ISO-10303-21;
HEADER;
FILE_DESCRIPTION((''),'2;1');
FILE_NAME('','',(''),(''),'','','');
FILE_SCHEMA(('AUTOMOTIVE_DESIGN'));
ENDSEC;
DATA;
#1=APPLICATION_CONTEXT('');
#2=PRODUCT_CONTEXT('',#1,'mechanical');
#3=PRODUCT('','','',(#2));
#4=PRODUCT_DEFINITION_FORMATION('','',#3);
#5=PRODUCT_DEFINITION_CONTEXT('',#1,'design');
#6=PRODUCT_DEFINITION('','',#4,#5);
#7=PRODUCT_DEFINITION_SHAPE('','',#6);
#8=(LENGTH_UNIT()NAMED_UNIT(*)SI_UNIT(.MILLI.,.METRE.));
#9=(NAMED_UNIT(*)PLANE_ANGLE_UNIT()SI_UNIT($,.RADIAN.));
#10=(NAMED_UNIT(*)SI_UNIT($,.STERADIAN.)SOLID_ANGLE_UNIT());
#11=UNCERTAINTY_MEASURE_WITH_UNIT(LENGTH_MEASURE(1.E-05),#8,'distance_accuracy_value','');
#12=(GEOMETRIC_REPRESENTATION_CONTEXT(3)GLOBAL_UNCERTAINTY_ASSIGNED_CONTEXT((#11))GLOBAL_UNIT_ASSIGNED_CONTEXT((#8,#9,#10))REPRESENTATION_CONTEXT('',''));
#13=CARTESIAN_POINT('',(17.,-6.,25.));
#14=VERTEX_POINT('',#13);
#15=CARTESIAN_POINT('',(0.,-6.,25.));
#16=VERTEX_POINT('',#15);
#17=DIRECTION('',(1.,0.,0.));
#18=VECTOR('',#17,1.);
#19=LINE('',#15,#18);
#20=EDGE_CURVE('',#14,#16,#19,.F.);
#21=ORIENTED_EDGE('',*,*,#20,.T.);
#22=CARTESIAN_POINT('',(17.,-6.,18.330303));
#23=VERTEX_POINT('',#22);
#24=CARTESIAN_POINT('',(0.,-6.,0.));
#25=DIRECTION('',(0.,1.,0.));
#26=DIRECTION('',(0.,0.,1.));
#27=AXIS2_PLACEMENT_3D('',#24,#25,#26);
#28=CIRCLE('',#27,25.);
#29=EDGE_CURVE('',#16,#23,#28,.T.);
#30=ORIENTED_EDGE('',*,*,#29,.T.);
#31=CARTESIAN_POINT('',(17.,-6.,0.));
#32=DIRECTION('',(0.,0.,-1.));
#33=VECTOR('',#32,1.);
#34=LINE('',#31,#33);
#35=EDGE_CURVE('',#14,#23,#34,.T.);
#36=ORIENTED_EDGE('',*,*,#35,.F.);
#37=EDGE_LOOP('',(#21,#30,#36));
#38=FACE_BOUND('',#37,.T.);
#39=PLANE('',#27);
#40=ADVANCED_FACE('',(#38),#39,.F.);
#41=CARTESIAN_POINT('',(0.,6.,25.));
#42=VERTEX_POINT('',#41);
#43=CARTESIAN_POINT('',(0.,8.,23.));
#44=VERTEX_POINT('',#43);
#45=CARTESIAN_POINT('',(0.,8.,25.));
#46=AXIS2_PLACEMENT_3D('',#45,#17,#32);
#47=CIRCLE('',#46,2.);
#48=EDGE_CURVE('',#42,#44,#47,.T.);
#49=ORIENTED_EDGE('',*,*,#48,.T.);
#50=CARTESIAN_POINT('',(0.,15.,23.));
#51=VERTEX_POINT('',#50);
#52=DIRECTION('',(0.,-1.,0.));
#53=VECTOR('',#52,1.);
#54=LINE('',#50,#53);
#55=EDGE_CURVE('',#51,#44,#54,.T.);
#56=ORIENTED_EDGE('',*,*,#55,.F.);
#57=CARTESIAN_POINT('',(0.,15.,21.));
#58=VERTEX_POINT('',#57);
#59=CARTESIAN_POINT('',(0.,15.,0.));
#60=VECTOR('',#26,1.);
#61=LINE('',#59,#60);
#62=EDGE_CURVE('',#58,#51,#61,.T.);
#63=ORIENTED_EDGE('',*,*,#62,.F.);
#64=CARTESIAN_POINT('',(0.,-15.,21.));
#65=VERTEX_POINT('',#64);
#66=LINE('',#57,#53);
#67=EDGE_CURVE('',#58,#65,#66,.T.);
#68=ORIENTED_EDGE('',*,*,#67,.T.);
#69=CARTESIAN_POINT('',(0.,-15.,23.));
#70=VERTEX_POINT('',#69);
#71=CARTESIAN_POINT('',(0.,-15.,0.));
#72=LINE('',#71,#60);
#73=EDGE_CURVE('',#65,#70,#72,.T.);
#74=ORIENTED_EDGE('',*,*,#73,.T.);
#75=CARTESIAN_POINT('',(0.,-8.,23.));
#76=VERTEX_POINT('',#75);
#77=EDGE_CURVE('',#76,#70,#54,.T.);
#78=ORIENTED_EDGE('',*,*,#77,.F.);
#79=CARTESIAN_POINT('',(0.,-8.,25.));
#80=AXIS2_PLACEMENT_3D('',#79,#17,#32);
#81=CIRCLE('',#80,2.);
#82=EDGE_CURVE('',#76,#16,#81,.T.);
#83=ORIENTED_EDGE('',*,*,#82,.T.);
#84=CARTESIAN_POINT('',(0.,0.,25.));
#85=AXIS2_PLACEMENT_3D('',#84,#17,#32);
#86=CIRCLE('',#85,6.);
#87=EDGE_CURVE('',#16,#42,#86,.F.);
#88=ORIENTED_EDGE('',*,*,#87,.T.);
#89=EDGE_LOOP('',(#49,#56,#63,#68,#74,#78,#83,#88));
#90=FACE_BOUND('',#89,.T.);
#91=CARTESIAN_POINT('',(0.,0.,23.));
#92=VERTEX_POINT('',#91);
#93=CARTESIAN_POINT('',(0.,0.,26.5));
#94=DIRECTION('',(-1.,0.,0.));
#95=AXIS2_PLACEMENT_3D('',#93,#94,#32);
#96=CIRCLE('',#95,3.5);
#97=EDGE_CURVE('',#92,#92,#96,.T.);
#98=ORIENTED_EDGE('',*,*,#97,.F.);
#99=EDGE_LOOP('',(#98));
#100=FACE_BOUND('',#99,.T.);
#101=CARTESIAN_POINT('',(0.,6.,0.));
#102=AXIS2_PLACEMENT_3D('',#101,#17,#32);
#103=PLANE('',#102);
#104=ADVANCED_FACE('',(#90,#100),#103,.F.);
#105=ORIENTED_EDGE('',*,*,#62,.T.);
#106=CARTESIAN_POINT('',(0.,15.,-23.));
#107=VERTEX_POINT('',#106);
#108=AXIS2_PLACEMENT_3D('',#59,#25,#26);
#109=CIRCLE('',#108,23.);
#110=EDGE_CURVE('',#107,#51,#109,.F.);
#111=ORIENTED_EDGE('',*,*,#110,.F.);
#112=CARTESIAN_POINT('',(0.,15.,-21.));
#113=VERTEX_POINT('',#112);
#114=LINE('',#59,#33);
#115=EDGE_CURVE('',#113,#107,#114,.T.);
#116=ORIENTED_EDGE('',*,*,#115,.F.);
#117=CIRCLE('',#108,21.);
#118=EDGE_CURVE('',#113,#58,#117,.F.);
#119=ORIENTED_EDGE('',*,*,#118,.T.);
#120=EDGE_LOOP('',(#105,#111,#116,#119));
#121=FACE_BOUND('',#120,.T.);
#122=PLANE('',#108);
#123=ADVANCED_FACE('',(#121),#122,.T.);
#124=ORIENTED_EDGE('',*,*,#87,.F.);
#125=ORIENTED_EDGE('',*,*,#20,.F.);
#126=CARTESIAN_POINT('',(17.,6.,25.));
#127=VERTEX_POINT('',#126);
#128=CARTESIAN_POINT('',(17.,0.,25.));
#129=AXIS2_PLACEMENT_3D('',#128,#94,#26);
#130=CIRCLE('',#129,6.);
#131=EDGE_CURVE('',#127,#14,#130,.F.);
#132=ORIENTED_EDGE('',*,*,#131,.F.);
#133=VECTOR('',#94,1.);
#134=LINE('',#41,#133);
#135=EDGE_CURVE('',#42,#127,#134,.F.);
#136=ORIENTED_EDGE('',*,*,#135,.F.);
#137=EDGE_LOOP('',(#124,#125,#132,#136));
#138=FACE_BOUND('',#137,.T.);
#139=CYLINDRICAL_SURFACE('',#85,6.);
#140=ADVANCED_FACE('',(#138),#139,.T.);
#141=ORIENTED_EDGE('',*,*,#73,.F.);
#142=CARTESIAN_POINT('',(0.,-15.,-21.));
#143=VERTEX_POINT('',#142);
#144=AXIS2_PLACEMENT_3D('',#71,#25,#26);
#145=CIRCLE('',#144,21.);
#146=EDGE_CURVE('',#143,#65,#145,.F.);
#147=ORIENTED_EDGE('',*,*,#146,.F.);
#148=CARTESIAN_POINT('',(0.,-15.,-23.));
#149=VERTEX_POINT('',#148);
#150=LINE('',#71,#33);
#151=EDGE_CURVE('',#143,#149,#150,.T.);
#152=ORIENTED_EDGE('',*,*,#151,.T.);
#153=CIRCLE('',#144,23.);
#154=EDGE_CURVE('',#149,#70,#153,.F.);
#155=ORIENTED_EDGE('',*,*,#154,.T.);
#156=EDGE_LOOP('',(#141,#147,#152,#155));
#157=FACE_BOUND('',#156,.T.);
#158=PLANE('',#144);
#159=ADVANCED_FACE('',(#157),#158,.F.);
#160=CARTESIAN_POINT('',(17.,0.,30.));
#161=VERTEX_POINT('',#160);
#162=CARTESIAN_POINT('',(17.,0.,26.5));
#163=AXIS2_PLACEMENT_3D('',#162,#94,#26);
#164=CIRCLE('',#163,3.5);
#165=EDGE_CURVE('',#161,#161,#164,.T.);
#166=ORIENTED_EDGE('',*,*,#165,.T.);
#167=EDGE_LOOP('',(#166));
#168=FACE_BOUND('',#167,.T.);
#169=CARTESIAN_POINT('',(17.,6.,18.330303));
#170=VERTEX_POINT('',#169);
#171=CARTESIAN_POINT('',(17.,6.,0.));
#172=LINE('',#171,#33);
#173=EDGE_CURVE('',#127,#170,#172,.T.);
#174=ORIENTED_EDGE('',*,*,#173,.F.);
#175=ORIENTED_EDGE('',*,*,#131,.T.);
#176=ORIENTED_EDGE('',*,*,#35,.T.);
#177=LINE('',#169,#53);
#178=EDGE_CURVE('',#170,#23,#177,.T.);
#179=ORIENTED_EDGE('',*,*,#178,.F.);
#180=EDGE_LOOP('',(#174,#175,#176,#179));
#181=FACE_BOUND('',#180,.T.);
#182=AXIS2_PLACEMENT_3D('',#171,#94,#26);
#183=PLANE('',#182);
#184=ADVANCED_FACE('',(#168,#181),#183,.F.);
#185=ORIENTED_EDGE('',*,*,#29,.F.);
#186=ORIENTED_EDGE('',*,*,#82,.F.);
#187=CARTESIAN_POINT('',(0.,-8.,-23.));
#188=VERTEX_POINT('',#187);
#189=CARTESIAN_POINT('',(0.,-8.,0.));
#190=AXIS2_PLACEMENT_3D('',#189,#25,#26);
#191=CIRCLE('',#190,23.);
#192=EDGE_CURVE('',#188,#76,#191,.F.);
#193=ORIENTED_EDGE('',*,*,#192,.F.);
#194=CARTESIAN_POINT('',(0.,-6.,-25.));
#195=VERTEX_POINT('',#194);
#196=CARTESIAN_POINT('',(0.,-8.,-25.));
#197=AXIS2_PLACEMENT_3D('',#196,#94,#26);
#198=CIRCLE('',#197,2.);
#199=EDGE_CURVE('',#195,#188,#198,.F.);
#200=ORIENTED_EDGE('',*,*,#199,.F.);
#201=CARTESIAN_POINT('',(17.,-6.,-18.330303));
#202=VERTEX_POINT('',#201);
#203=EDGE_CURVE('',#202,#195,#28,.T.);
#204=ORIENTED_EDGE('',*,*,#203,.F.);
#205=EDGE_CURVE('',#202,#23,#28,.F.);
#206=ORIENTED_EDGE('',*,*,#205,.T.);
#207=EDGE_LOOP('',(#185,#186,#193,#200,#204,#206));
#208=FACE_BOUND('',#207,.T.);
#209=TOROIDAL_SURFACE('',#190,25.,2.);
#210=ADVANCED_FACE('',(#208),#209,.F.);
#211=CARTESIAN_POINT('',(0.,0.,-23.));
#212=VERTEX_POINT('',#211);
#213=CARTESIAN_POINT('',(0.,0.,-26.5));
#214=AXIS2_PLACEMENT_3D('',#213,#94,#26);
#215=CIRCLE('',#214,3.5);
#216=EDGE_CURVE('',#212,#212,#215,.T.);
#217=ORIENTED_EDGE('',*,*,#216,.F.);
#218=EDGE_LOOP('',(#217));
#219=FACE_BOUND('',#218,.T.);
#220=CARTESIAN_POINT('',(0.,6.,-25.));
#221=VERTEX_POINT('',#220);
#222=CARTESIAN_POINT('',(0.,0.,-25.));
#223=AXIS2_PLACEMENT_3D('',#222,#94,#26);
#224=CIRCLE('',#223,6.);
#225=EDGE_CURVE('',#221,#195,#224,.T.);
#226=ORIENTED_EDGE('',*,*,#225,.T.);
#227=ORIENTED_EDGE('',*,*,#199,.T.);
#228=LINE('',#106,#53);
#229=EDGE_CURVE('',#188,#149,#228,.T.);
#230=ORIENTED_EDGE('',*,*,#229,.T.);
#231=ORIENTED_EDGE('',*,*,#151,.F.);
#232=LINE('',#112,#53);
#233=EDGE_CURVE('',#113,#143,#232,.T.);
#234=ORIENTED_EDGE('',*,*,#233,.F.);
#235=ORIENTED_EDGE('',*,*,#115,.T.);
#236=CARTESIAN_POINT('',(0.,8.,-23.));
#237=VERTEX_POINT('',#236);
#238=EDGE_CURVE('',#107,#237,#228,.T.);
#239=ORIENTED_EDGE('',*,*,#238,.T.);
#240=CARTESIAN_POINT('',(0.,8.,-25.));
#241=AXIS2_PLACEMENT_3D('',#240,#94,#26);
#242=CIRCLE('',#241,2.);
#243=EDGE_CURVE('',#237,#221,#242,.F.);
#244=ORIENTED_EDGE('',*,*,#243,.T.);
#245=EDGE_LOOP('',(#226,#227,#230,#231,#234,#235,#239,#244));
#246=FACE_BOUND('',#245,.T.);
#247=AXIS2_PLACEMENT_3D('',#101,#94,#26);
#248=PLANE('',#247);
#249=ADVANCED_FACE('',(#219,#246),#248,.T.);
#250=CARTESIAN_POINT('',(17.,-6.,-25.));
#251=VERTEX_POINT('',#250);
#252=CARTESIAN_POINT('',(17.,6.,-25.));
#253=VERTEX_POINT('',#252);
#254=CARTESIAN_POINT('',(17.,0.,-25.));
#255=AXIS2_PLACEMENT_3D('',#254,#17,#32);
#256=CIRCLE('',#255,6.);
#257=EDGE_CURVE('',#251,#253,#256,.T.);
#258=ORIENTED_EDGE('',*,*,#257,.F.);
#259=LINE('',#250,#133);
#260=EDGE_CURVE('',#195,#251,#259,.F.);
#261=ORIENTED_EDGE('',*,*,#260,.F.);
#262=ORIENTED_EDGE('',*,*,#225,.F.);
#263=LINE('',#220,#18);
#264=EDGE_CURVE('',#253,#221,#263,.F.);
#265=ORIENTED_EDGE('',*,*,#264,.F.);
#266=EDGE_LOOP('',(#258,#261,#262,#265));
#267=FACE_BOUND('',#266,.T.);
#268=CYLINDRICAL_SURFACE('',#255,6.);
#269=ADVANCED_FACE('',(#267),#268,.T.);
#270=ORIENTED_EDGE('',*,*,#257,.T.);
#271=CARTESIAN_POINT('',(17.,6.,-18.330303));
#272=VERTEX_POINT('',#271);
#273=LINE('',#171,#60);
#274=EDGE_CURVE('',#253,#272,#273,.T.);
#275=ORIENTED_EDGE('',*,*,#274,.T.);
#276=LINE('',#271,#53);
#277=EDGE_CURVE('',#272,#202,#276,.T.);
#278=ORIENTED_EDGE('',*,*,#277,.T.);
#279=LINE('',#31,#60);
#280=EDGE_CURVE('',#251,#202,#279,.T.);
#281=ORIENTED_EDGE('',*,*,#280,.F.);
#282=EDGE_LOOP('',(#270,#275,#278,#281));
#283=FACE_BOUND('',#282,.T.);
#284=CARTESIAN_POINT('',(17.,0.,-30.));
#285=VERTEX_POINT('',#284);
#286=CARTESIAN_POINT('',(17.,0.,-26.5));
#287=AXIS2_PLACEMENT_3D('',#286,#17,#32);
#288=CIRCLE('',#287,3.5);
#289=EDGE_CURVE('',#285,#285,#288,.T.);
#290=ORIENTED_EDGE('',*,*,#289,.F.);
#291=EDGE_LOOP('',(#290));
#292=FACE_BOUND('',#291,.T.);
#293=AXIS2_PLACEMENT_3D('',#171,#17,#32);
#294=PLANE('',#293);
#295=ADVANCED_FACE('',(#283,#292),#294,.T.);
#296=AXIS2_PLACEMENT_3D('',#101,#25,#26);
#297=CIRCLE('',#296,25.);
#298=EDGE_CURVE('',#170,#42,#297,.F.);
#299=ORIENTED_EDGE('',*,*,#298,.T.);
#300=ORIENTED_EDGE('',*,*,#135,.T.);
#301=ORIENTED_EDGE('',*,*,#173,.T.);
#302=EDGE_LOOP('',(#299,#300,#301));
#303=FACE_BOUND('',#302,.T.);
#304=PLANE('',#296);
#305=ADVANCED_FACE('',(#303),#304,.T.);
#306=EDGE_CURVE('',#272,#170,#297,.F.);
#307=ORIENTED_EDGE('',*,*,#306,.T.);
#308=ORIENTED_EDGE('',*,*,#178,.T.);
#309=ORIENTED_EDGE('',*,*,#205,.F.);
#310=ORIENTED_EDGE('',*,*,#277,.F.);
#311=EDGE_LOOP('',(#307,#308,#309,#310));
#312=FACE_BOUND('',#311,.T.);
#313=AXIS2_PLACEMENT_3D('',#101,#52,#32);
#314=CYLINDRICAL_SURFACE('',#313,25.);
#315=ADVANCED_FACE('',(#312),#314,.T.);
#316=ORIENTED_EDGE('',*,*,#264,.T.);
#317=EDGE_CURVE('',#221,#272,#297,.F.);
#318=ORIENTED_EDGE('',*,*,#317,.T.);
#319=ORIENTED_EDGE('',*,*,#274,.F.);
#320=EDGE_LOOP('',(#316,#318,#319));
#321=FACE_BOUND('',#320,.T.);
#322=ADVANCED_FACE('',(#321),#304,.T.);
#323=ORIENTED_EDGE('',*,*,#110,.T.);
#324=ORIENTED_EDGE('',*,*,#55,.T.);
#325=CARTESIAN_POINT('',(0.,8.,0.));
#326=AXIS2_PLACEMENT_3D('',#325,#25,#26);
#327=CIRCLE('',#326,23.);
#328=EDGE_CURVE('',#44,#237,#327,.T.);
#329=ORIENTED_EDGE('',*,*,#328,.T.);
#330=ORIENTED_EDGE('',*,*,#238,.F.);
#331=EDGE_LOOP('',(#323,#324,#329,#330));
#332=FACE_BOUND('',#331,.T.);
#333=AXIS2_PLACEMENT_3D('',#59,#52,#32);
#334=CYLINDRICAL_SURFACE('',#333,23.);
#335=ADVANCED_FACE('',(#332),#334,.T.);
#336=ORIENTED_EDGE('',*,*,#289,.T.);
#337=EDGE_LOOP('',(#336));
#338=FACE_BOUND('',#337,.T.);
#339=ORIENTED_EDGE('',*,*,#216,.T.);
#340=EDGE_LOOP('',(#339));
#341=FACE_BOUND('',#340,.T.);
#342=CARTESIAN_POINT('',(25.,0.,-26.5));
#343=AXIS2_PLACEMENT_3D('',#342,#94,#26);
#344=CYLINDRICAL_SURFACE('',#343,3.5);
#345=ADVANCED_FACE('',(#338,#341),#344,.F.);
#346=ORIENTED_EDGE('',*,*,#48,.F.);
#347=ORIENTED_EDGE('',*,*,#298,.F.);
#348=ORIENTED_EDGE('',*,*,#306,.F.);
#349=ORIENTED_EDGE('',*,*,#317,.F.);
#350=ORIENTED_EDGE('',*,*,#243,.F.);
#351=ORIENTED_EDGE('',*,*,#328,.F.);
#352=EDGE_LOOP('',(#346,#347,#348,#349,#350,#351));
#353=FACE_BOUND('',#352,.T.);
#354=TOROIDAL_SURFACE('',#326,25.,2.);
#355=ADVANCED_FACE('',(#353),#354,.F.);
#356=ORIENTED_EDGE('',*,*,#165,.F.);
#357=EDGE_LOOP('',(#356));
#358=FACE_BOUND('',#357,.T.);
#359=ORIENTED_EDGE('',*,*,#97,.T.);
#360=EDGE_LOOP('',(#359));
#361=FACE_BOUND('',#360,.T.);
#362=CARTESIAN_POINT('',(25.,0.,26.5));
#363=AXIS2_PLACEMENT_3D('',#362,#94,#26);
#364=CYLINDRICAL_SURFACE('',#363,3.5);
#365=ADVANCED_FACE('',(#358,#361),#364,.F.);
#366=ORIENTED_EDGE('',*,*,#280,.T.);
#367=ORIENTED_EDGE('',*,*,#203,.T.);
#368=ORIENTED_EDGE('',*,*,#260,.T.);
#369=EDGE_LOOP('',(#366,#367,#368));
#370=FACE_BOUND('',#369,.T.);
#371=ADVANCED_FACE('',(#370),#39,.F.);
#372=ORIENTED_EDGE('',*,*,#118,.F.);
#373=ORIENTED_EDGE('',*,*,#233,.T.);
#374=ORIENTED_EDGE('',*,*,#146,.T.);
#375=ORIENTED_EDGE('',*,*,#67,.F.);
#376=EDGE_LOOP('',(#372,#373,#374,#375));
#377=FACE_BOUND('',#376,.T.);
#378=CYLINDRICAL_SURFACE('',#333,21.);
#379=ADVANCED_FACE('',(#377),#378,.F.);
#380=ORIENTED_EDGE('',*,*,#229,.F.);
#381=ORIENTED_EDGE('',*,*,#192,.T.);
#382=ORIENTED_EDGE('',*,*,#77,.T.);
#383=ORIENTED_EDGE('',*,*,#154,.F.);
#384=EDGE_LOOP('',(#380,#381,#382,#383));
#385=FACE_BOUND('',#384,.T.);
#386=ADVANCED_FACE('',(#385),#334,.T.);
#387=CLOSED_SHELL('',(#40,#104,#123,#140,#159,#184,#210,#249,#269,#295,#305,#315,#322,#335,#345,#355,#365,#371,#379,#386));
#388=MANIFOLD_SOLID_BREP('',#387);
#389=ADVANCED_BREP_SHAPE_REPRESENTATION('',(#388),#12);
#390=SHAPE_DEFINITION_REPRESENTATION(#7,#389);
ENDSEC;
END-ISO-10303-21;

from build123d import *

# Parameters (mm, degrees)
BOSS_EXTRUDE1_DEPTH = 6
BOSS_EXTRUDE2_DEPTH = 15
FILLET1_RADIUS      = 6
FILLET1_LENGTH      = 17
FILLET2_RADIUS      = 6
FILLET2_LENGTH      = 17
FILLET3_ANGLE       = 180
SKETCH2_R           = 3.5
CUT_EXTRUDE1_DEPTH  = 43.555845662


with BuildPart() as part:
    # Sketch1 → Boss-Extrude1 (new, symmetric)
    with BuildSketch(Plane(origin=(0, 0, 0), x_dir=(1, 0, 0), z_dir=(0, 1, 0))):
        with BuildLine():
            Line((25, 0), (23, 0))
            ThreePointArc((23, 0), (16.263455967, -16.263455967), (0, -23))
            Line((0, -23), (0, -31))
            Line((0, -31), (17, -31))
            Line((17, -31), (17, -18.33030278))
            ThreePointArc((17, -18.33030278), (22.912878475, -10), (25, 0))
        make_face()
        with BuildLine():
            Line((0, 31), (0, 23))
            ThreePointArc((0, 23), (16.263455967, 16.263455967), (23, 0))
            Line((23, 0), (25, 0))
            ThreePointArc((25, 0), (22.912878475, 10), (17, 18.33030278))
            Line((17, 18.33030278), (17, 31))
            Line((17, 31), (0, 31))
        make_face()
    extrude(amount=BOSS_EXTRUDE1_DEPTH, both=True)

    # Sketch1<4> → Boss-Extrude2 (add, symmetric)
    with BuildSketch(Plane(origin=(0, 0, 0), x_dir=(1, 0, 0), z_dir=(0, 1, 0))):
        with BuildLine():
            Line((0, 23), (0, 21))
            ThreePointArc((0, 21), (14.849242405, 14.849242405), (21, 0))
            Line((21, 0), (23, 0))
            ThreePointArc((23, 0), (16.263455967, 16.263455967), (0, 23))
        make_face()
        with BuildLine():
            Line((23, 0), (21, 0))
            ThreePointArc((21, 0), (14.849242405, -14.849242405), (0, -21))
            Line((0, -21), (0, -23))
            ThreePointArc((0, -23), (16.263455967, -16.263455967), (23, 0))
        make_face()
    extrude(amount=BOSS_EXTRUDE2_DEPTH, both=True)

    # Fillet1: full round fillet: the end face becomes a half cylinder, R = half its width
    fillet1_face = Plane((8.5, 0, 31), x_dir=(1, 0, 0), z_dir=(0, 0, 1))  # on the end face: x along it, z out of the body
    fillet1_slab = fillet1_face.offset(-FILLET1_RADIUS / 2) * Box(FILLET1_LENGTH, 2 * FILLET1_RADIUS, FILLET1_RADIUS, mode=Mode.PRIVATE)  # the body's end, R deep
    fillet1_round = Plane((8.5, 0, 25), x_dir=(0, 0, 1), z_dir=(1, 0, 0)) * Cylinder(FILLET1_RADIUS, FILLET1_LENGTH, mode=Mode.PRIVATE)  # its axis R under the face
    add(fillet1_slab - fillet1_round, mode=Mode.SUBTRACT)

    # Fillet2: full round fillet: the end face becomes a half cylinder, R = half its width
    fillet2_face = Plane((8.5, 0, -31), x_dir=(-1, 0, 0), z_dir=(0, 0, -1))  # on the end face: x along it, z out of the body
    fillet2_slab = fillet2_face.offset(-FILLET2_RADIUS / 2) * Box(FILLET2_LENGTH, 2 * FILLET2_RADIUS, FILLET2_RADIUS, mode=Mode.PRIVATE)  # the body's end, R deep
    fillet2_round = Plane((8.5, 0, -25), x_dir=(0, 0, -1), z_dir=(-1, 0, 0)) * Cylinder(FILLET2_RADIUS, FILLET2_LENGTH, mode=Mode.PRIVATE)  # its axis R under the face
    add(fillet2_slab - fillet2_round, mode=Mode.SUBTRACT)

    # Fillet3: read off the stored shape, not the designer's step
    # Fillet3 outline → Fillet3 (revolve)
    with BuildSketch(Plane.ZY):
        with BuildLine():
            ThreePointArc((23, -8), (23.585786438, -6.585786438), (25, -6))
            Line((25, -6), (23, -6))
            Line((23, -6), (23, -8))
        make_face()
        with BuildLine():
            Line((23, 6), (25, 6))
            ThreePointArc((25, 6), (23.585786438, 6.585786438), (23, 8))
            Line((23, 8), (23, 6))
        make_face()
    revolve(axis=Axis((0, 0, 0), (0, 1, 0)), revolution_arc=FILLET3_ANGLE)

    # Sketch2 → Cut-Extrude1 (cut, through all)
    with BuildSketch(Plane.ZY):
        with Locations((-26.5, 0)):
            Circle(SKETCH2_R)
        with Locations((26.5, 0)):
            Circle(SKETCH2_R)
    extrude(amount=-CUT_EXTRUDE1_DEPTH, mode=Mode.SUBTRACT)


solid = part.part
